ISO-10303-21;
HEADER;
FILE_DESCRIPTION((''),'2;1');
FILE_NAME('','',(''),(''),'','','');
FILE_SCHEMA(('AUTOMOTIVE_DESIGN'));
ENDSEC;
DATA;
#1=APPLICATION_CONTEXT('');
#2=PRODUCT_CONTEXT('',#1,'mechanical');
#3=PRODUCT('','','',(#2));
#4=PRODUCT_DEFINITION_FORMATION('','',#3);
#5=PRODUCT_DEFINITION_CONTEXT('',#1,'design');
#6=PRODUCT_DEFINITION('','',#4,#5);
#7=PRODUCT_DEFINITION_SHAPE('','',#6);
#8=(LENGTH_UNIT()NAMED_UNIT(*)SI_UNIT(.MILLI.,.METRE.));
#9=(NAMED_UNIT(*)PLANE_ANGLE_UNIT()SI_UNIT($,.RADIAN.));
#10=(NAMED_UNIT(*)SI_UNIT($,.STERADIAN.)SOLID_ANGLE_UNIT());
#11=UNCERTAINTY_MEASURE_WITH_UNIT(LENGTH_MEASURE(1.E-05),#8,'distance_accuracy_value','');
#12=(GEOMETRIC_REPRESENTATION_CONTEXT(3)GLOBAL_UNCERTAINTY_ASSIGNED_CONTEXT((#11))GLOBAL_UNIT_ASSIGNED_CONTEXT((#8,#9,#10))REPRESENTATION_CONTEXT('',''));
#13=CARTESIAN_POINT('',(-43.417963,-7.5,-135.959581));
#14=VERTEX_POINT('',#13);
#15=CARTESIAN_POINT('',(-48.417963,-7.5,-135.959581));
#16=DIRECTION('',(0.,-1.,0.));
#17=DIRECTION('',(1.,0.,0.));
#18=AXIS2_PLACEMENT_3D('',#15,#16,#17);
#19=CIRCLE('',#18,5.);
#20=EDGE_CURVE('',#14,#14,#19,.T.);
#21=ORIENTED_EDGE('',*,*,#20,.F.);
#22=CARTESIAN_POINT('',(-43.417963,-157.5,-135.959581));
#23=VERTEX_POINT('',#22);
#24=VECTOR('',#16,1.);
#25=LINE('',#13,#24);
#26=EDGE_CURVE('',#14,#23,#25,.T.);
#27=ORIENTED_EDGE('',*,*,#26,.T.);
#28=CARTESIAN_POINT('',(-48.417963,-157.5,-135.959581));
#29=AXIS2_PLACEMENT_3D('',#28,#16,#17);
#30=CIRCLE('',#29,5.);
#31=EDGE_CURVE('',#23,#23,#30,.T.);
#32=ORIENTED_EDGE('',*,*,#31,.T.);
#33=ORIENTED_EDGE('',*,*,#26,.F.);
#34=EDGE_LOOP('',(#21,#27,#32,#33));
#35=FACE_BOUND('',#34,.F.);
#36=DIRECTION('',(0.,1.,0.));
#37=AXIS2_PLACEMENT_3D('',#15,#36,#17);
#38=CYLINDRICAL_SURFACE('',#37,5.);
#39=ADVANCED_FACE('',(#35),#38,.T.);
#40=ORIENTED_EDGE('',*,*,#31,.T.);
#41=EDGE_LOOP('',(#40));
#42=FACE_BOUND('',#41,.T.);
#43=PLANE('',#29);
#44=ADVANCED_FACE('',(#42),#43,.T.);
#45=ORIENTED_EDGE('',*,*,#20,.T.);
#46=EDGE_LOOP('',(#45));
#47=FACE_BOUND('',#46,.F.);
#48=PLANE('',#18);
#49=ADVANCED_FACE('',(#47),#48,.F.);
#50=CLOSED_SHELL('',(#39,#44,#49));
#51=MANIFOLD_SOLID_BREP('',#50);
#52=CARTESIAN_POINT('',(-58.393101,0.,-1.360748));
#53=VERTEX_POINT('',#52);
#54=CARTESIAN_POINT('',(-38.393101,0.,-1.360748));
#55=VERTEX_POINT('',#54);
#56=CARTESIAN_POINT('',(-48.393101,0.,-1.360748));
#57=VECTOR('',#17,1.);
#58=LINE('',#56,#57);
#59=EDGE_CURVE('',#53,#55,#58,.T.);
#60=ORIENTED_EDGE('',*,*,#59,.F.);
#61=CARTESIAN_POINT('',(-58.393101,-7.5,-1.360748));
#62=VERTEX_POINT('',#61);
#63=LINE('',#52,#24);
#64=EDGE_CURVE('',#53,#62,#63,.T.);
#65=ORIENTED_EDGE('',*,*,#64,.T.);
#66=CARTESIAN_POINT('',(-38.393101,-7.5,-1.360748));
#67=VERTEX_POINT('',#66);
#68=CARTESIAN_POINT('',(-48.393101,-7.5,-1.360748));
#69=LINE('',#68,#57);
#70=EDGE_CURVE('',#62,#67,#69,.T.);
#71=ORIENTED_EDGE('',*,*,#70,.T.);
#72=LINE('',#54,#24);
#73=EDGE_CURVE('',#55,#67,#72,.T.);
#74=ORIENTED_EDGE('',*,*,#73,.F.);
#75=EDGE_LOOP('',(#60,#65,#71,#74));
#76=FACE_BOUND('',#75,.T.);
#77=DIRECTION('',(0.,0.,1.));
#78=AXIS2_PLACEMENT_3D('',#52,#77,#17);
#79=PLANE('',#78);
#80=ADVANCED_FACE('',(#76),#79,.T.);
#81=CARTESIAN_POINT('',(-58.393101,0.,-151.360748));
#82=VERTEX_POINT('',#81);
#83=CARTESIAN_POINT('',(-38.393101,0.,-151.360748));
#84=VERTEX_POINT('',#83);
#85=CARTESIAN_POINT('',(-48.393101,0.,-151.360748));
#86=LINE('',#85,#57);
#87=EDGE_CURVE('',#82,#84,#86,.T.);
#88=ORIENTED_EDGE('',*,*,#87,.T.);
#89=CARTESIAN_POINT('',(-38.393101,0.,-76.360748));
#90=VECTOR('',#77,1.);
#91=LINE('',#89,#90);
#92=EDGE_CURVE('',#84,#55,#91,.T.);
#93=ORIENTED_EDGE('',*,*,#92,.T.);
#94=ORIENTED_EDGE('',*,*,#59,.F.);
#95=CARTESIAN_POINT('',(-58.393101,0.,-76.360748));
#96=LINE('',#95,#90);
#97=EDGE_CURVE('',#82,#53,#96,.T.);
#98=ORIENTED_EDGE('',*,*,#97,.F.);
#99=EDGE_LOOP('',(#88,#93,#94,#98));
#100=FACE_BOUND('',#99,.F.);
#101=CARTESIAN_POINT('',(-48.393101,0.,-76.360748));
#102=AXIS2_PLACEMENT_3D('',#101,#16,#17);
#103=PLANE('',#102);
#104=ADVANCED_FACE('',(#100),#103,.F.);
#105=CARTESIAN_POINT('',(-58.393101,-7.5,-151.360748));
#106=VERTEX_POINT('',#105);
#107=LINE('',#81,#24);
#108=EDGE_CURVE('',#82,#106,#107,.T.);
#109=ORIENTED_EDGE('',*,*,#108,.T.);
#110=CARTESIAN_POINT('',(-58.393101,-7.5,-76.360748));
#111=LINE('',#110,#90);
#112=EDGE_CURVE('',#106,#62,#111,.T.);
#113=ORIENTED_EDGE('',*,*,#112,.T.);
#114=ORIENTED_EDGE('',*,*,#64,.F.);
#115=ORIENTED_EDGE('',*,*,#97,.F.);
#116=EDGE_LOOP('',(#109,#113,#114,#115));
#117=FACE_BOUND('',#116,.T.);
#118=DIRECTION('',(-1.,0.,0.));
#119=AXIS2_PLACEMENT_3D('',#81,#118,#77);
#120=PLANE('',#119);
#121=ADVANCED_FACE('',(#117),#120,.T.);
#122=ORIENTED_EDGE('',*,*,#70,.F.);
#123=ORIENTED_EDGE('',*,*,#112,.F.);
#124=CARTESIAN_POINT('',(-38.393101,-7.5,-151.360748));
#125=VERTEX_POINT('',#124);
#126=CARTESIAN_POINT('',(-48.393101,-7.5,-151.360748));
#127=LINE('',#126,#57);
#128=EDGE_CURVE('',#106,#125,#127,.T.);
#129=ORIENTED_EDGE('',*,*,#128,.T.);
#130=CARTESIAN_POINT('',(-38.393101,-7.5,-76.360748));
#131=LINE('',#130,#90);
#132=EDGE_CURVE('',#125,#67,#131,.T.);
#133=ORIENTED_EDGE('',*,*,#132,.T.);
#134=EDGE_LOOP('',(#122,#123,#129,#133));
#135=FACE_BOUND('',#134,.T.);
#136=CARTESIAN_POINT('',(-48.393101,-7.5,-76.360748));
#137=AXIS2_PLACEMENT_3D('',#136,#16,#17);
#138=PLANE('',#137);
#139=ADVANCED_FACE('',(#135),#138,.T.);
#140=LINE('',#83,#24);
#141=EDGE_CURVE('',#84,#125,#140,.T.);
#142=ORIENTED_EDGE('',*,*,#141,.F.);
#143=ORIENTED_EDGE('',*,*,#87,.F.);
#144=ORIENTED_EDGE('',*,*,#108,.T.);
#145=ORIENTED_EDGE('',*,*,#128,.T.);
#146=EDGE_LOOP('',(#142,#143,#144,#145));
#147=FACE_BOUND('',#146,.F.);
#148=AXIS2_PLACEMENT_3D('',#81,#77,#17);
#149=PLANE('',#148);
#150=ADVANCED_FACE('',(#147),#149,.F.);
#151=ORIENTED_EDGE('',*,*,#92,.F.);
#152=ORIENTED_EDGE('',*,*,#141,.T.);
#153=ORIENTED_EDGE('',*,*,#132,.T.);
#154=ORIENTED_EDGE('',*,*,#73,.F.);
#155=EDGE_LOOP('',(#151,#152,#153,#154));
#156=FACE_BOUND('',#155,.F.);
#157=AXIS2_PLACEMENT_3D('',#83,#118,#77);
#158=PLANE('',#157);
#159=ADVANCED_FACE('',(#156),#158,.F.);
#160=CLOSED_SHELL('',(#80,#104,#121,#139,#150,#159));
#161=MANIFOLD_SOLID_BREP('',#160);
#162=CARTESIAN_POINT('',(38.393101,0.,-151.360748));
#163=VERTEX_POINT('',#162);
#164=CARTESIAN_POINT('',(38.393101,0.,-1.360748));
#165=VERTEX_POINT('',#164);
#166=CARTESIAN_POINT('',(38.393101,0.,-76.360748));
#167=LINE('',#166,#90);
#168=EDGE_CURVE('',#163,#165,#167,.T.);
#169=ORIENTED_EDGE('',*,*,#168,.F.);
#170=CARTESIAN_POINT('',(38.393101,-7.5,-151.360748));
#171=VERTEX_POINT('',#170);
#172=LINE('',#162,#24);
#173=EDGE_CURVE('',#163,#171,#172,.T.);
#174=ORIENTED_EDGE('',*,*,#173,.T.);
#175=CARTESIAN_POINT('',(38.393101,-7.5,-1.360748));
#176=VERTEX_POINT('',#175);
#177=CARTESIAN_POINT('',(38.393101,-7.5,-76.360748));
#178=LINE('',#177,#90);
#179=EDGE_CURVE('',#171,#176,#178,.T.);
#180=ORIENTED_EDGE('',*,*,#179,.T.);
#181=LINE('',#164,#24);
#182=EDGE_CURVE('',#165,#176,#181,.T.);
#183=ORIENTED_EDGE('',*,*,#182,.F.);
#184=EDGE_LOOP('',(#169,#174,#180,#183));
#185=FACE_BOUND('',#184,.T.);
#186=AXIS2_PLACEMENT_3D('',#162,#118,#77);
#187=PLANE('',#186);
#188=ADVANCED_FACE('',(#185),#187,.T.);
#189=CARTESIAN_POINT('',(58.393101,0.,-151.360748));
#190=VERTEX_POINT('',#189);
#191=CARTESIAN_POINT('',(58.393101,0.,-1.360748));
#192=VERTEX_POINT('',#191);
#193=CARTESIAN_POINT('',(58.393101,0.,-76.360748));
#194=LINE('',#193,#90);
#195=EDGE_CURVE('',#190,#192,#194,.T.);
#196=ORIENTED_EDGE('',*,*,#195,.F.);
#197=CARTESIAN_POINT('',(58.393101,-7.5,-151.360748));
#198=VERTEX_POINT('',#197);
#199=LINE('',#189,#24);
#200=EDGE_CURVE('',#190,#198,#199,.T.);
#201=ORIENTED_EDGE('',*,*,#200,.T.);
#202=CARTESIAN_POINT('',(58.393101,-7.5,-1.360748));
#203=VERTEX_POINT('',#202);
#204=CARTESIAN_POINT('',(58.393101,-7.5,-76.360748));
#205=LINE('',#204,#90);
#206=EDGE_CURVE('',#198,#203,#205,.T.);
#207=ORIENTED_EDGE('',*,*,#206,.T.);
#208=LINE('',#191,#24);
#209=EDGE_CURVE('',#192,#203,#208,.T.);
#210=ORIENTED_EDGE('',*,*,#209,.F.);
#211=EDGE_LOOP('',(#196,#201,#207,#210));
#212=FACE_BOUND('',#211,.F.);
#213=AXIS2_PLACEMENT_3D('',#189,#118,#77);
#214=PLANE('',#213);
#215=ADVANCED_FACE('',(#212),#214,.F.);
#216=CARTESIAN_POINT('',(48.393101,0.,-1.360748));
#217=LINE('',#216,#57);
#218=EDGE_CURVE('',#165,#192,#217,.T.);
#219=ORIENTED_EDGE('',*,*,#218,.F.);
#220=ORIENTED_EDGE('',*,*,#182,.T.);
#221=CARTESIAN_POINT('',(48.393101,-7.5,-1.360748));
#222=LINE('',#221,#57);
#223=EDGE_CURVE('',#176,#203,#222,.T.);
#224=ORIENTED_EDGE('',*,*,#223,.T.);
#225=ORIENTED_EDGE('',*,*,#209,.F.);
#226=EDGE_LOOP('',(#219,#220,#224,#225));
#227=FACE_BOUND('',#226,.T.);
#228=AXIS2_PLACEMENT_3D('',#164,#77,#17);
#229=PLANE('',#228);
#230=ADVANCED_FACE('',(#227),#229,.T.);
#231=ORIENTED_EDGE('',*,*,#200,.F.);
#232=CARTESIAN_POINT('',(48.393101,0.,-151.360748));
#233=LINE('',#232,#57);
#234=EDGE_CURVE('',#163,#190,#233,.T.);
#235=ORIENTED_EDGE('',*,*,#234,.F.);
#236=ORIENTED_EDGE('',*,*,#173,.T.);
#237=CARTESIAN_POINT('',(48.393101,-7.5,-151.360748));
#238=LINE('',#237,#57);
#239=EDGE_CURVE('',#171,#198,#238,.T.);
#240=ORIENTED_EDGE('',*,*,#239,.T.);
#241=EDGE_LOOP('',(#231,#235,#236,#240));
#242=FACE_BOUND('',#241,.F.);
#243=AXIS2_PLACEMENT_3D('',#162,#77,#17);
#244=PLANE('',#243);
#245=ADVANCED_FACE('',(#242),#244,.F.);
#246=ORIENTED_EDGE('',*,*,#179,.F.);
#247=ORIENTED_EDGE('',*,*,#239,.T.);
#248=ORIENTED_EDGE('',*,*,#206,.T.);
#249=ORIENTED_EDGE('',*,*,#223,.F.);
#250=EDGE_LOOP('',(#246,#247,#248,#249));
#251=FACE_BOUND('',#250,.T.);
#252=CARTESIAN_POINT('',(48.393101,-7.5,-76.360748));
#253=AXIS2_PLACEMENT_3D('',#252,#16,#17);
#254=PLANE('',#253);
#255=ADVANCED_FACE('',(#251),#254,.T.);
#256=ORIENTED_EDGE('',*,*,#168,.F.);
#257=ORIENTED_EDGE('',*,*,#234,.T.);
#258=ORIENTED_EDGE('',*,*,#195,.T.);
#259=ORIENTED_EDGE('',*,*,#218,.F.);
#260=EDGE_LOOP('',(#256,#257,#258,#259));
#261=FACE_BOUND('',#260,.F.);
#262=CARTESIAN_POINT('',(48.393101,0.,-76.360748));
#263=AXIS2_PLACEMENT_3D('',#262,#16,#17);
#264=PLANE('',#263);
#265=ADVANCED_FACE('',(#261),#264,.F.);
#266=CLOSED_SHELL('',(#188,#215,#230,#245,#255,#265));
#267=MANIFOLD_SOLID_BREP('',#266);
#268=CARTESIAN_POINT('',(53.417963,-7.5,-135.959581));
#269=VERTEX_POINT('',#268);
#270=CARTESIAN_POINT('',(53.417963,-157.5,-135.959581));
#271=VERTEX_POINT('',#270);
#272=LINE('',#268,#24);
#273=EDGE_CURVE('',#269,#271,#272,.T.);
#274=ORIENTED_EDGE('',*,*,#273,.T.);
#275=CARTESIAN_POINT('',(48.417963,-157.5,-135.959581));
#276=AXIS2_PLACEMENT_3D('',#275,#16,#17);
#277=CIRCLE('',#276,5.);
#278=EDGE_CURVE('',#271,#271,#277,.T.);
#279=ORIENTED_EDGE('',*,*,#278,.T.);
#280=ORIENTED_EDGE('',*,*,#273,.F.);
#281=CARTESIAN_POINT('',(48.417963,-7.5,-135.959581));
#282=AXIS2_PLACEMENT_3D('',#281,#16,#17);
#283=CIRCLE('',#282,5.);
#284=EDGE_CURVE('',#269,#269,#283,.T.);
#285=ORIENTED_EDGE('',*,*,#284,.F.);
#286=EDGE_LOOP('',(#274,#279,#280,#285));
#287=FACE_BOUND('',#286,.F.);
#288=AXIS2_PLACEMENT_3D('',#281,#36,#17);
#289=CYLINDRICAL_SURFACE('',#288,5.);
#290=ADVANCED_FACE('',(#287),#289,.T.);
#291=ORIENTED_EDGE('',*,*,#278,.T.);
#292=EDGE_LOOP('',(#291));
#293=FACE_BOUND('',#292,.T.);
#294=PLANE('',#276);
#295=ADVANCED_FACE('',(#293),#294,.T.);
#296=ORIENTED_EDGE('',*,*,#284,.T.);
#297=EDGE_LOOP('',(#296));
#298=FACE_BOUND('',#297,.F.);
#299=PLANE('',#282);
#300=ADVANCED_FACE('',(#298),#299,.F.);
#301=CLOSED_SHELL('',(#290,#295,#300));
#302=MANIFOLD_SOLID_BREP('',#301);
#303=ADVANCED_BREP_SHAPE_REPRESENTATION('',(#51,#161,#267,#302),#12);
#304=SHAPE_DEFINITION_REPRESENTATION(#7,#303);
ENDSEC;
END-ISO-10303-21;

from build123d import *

# Parameters (mm, degrees)
F0_W     = 20
F0_H     = 150
F1_DEPTH = 7.5
F2_DEPTH = 7.5
F5_R     = 5
F6_DEPTH = 150


# Not quite as in the source:
# - a feature of the source that left no trace in its solid (it failed there, or was rolled back) is left out


with BuildPart() as f1:
    # F0 (on Front) → F1 (new body)
    with BuildSketch(Plane.XZ):
        with Locations((48.3931005001, -76.3607483447)):
            Rectangle(F0_W, F0_H)
    extrude(amount=F1_DEPTH)


with BuildPart() as f1b:
    # F0 (on Front) → F1, piece 2 (new body)
    with BuildSketch(Plane.XZ):
        with Locations((-48.3931005001, -76.3607483447)):
            Rectangle(F0_W, F0_H)
    extrude(amount=F1_DEPTH)


with BuildPart() as f2:
    # F2 (new): a face of the model
    f2_faces = [f1.part.faces().sort_by_distance(p)[0] for p in [
        (48.3931005001, -7.5, -76.3607483447),
    ]]
    extrude(f2_faces, amount=-F2_DEPTH)


with BuildPart() as f2b:
    # F2#2 (new): a face of the model
    f2_2_faces = [f1b.part.faces().sort_by_distance(p)[0] for p in [
        (-48.3931005001, -7.5, -76.3607483447),
    ]]
    extrude(f2_2_faces, amount=-F2_DEPTH)


with BuildPart() as f6:
    # F5 (on face) → F6 (new body)
    with BuildSketch(Plane.XZ.offset(7.5)):
        with Locations((48.4179630876, -135.9595805407)):
            Circle(F5_R)
    extrude(amount=F6_DEPTH)


with BuildPart() as f6b:
    # F5 (on face) → F6, piece 2 (new body)
    with BuildSketch(Plane.XZ.offset(7.5)):
        with Locations((-48.4179630876, -135.9595805407)):
            Circle(F5_R)
    extrude(amount=F6_DEPTH)


solid = Compound([f1.part, f1b.part, f6.part, f6b.part])
